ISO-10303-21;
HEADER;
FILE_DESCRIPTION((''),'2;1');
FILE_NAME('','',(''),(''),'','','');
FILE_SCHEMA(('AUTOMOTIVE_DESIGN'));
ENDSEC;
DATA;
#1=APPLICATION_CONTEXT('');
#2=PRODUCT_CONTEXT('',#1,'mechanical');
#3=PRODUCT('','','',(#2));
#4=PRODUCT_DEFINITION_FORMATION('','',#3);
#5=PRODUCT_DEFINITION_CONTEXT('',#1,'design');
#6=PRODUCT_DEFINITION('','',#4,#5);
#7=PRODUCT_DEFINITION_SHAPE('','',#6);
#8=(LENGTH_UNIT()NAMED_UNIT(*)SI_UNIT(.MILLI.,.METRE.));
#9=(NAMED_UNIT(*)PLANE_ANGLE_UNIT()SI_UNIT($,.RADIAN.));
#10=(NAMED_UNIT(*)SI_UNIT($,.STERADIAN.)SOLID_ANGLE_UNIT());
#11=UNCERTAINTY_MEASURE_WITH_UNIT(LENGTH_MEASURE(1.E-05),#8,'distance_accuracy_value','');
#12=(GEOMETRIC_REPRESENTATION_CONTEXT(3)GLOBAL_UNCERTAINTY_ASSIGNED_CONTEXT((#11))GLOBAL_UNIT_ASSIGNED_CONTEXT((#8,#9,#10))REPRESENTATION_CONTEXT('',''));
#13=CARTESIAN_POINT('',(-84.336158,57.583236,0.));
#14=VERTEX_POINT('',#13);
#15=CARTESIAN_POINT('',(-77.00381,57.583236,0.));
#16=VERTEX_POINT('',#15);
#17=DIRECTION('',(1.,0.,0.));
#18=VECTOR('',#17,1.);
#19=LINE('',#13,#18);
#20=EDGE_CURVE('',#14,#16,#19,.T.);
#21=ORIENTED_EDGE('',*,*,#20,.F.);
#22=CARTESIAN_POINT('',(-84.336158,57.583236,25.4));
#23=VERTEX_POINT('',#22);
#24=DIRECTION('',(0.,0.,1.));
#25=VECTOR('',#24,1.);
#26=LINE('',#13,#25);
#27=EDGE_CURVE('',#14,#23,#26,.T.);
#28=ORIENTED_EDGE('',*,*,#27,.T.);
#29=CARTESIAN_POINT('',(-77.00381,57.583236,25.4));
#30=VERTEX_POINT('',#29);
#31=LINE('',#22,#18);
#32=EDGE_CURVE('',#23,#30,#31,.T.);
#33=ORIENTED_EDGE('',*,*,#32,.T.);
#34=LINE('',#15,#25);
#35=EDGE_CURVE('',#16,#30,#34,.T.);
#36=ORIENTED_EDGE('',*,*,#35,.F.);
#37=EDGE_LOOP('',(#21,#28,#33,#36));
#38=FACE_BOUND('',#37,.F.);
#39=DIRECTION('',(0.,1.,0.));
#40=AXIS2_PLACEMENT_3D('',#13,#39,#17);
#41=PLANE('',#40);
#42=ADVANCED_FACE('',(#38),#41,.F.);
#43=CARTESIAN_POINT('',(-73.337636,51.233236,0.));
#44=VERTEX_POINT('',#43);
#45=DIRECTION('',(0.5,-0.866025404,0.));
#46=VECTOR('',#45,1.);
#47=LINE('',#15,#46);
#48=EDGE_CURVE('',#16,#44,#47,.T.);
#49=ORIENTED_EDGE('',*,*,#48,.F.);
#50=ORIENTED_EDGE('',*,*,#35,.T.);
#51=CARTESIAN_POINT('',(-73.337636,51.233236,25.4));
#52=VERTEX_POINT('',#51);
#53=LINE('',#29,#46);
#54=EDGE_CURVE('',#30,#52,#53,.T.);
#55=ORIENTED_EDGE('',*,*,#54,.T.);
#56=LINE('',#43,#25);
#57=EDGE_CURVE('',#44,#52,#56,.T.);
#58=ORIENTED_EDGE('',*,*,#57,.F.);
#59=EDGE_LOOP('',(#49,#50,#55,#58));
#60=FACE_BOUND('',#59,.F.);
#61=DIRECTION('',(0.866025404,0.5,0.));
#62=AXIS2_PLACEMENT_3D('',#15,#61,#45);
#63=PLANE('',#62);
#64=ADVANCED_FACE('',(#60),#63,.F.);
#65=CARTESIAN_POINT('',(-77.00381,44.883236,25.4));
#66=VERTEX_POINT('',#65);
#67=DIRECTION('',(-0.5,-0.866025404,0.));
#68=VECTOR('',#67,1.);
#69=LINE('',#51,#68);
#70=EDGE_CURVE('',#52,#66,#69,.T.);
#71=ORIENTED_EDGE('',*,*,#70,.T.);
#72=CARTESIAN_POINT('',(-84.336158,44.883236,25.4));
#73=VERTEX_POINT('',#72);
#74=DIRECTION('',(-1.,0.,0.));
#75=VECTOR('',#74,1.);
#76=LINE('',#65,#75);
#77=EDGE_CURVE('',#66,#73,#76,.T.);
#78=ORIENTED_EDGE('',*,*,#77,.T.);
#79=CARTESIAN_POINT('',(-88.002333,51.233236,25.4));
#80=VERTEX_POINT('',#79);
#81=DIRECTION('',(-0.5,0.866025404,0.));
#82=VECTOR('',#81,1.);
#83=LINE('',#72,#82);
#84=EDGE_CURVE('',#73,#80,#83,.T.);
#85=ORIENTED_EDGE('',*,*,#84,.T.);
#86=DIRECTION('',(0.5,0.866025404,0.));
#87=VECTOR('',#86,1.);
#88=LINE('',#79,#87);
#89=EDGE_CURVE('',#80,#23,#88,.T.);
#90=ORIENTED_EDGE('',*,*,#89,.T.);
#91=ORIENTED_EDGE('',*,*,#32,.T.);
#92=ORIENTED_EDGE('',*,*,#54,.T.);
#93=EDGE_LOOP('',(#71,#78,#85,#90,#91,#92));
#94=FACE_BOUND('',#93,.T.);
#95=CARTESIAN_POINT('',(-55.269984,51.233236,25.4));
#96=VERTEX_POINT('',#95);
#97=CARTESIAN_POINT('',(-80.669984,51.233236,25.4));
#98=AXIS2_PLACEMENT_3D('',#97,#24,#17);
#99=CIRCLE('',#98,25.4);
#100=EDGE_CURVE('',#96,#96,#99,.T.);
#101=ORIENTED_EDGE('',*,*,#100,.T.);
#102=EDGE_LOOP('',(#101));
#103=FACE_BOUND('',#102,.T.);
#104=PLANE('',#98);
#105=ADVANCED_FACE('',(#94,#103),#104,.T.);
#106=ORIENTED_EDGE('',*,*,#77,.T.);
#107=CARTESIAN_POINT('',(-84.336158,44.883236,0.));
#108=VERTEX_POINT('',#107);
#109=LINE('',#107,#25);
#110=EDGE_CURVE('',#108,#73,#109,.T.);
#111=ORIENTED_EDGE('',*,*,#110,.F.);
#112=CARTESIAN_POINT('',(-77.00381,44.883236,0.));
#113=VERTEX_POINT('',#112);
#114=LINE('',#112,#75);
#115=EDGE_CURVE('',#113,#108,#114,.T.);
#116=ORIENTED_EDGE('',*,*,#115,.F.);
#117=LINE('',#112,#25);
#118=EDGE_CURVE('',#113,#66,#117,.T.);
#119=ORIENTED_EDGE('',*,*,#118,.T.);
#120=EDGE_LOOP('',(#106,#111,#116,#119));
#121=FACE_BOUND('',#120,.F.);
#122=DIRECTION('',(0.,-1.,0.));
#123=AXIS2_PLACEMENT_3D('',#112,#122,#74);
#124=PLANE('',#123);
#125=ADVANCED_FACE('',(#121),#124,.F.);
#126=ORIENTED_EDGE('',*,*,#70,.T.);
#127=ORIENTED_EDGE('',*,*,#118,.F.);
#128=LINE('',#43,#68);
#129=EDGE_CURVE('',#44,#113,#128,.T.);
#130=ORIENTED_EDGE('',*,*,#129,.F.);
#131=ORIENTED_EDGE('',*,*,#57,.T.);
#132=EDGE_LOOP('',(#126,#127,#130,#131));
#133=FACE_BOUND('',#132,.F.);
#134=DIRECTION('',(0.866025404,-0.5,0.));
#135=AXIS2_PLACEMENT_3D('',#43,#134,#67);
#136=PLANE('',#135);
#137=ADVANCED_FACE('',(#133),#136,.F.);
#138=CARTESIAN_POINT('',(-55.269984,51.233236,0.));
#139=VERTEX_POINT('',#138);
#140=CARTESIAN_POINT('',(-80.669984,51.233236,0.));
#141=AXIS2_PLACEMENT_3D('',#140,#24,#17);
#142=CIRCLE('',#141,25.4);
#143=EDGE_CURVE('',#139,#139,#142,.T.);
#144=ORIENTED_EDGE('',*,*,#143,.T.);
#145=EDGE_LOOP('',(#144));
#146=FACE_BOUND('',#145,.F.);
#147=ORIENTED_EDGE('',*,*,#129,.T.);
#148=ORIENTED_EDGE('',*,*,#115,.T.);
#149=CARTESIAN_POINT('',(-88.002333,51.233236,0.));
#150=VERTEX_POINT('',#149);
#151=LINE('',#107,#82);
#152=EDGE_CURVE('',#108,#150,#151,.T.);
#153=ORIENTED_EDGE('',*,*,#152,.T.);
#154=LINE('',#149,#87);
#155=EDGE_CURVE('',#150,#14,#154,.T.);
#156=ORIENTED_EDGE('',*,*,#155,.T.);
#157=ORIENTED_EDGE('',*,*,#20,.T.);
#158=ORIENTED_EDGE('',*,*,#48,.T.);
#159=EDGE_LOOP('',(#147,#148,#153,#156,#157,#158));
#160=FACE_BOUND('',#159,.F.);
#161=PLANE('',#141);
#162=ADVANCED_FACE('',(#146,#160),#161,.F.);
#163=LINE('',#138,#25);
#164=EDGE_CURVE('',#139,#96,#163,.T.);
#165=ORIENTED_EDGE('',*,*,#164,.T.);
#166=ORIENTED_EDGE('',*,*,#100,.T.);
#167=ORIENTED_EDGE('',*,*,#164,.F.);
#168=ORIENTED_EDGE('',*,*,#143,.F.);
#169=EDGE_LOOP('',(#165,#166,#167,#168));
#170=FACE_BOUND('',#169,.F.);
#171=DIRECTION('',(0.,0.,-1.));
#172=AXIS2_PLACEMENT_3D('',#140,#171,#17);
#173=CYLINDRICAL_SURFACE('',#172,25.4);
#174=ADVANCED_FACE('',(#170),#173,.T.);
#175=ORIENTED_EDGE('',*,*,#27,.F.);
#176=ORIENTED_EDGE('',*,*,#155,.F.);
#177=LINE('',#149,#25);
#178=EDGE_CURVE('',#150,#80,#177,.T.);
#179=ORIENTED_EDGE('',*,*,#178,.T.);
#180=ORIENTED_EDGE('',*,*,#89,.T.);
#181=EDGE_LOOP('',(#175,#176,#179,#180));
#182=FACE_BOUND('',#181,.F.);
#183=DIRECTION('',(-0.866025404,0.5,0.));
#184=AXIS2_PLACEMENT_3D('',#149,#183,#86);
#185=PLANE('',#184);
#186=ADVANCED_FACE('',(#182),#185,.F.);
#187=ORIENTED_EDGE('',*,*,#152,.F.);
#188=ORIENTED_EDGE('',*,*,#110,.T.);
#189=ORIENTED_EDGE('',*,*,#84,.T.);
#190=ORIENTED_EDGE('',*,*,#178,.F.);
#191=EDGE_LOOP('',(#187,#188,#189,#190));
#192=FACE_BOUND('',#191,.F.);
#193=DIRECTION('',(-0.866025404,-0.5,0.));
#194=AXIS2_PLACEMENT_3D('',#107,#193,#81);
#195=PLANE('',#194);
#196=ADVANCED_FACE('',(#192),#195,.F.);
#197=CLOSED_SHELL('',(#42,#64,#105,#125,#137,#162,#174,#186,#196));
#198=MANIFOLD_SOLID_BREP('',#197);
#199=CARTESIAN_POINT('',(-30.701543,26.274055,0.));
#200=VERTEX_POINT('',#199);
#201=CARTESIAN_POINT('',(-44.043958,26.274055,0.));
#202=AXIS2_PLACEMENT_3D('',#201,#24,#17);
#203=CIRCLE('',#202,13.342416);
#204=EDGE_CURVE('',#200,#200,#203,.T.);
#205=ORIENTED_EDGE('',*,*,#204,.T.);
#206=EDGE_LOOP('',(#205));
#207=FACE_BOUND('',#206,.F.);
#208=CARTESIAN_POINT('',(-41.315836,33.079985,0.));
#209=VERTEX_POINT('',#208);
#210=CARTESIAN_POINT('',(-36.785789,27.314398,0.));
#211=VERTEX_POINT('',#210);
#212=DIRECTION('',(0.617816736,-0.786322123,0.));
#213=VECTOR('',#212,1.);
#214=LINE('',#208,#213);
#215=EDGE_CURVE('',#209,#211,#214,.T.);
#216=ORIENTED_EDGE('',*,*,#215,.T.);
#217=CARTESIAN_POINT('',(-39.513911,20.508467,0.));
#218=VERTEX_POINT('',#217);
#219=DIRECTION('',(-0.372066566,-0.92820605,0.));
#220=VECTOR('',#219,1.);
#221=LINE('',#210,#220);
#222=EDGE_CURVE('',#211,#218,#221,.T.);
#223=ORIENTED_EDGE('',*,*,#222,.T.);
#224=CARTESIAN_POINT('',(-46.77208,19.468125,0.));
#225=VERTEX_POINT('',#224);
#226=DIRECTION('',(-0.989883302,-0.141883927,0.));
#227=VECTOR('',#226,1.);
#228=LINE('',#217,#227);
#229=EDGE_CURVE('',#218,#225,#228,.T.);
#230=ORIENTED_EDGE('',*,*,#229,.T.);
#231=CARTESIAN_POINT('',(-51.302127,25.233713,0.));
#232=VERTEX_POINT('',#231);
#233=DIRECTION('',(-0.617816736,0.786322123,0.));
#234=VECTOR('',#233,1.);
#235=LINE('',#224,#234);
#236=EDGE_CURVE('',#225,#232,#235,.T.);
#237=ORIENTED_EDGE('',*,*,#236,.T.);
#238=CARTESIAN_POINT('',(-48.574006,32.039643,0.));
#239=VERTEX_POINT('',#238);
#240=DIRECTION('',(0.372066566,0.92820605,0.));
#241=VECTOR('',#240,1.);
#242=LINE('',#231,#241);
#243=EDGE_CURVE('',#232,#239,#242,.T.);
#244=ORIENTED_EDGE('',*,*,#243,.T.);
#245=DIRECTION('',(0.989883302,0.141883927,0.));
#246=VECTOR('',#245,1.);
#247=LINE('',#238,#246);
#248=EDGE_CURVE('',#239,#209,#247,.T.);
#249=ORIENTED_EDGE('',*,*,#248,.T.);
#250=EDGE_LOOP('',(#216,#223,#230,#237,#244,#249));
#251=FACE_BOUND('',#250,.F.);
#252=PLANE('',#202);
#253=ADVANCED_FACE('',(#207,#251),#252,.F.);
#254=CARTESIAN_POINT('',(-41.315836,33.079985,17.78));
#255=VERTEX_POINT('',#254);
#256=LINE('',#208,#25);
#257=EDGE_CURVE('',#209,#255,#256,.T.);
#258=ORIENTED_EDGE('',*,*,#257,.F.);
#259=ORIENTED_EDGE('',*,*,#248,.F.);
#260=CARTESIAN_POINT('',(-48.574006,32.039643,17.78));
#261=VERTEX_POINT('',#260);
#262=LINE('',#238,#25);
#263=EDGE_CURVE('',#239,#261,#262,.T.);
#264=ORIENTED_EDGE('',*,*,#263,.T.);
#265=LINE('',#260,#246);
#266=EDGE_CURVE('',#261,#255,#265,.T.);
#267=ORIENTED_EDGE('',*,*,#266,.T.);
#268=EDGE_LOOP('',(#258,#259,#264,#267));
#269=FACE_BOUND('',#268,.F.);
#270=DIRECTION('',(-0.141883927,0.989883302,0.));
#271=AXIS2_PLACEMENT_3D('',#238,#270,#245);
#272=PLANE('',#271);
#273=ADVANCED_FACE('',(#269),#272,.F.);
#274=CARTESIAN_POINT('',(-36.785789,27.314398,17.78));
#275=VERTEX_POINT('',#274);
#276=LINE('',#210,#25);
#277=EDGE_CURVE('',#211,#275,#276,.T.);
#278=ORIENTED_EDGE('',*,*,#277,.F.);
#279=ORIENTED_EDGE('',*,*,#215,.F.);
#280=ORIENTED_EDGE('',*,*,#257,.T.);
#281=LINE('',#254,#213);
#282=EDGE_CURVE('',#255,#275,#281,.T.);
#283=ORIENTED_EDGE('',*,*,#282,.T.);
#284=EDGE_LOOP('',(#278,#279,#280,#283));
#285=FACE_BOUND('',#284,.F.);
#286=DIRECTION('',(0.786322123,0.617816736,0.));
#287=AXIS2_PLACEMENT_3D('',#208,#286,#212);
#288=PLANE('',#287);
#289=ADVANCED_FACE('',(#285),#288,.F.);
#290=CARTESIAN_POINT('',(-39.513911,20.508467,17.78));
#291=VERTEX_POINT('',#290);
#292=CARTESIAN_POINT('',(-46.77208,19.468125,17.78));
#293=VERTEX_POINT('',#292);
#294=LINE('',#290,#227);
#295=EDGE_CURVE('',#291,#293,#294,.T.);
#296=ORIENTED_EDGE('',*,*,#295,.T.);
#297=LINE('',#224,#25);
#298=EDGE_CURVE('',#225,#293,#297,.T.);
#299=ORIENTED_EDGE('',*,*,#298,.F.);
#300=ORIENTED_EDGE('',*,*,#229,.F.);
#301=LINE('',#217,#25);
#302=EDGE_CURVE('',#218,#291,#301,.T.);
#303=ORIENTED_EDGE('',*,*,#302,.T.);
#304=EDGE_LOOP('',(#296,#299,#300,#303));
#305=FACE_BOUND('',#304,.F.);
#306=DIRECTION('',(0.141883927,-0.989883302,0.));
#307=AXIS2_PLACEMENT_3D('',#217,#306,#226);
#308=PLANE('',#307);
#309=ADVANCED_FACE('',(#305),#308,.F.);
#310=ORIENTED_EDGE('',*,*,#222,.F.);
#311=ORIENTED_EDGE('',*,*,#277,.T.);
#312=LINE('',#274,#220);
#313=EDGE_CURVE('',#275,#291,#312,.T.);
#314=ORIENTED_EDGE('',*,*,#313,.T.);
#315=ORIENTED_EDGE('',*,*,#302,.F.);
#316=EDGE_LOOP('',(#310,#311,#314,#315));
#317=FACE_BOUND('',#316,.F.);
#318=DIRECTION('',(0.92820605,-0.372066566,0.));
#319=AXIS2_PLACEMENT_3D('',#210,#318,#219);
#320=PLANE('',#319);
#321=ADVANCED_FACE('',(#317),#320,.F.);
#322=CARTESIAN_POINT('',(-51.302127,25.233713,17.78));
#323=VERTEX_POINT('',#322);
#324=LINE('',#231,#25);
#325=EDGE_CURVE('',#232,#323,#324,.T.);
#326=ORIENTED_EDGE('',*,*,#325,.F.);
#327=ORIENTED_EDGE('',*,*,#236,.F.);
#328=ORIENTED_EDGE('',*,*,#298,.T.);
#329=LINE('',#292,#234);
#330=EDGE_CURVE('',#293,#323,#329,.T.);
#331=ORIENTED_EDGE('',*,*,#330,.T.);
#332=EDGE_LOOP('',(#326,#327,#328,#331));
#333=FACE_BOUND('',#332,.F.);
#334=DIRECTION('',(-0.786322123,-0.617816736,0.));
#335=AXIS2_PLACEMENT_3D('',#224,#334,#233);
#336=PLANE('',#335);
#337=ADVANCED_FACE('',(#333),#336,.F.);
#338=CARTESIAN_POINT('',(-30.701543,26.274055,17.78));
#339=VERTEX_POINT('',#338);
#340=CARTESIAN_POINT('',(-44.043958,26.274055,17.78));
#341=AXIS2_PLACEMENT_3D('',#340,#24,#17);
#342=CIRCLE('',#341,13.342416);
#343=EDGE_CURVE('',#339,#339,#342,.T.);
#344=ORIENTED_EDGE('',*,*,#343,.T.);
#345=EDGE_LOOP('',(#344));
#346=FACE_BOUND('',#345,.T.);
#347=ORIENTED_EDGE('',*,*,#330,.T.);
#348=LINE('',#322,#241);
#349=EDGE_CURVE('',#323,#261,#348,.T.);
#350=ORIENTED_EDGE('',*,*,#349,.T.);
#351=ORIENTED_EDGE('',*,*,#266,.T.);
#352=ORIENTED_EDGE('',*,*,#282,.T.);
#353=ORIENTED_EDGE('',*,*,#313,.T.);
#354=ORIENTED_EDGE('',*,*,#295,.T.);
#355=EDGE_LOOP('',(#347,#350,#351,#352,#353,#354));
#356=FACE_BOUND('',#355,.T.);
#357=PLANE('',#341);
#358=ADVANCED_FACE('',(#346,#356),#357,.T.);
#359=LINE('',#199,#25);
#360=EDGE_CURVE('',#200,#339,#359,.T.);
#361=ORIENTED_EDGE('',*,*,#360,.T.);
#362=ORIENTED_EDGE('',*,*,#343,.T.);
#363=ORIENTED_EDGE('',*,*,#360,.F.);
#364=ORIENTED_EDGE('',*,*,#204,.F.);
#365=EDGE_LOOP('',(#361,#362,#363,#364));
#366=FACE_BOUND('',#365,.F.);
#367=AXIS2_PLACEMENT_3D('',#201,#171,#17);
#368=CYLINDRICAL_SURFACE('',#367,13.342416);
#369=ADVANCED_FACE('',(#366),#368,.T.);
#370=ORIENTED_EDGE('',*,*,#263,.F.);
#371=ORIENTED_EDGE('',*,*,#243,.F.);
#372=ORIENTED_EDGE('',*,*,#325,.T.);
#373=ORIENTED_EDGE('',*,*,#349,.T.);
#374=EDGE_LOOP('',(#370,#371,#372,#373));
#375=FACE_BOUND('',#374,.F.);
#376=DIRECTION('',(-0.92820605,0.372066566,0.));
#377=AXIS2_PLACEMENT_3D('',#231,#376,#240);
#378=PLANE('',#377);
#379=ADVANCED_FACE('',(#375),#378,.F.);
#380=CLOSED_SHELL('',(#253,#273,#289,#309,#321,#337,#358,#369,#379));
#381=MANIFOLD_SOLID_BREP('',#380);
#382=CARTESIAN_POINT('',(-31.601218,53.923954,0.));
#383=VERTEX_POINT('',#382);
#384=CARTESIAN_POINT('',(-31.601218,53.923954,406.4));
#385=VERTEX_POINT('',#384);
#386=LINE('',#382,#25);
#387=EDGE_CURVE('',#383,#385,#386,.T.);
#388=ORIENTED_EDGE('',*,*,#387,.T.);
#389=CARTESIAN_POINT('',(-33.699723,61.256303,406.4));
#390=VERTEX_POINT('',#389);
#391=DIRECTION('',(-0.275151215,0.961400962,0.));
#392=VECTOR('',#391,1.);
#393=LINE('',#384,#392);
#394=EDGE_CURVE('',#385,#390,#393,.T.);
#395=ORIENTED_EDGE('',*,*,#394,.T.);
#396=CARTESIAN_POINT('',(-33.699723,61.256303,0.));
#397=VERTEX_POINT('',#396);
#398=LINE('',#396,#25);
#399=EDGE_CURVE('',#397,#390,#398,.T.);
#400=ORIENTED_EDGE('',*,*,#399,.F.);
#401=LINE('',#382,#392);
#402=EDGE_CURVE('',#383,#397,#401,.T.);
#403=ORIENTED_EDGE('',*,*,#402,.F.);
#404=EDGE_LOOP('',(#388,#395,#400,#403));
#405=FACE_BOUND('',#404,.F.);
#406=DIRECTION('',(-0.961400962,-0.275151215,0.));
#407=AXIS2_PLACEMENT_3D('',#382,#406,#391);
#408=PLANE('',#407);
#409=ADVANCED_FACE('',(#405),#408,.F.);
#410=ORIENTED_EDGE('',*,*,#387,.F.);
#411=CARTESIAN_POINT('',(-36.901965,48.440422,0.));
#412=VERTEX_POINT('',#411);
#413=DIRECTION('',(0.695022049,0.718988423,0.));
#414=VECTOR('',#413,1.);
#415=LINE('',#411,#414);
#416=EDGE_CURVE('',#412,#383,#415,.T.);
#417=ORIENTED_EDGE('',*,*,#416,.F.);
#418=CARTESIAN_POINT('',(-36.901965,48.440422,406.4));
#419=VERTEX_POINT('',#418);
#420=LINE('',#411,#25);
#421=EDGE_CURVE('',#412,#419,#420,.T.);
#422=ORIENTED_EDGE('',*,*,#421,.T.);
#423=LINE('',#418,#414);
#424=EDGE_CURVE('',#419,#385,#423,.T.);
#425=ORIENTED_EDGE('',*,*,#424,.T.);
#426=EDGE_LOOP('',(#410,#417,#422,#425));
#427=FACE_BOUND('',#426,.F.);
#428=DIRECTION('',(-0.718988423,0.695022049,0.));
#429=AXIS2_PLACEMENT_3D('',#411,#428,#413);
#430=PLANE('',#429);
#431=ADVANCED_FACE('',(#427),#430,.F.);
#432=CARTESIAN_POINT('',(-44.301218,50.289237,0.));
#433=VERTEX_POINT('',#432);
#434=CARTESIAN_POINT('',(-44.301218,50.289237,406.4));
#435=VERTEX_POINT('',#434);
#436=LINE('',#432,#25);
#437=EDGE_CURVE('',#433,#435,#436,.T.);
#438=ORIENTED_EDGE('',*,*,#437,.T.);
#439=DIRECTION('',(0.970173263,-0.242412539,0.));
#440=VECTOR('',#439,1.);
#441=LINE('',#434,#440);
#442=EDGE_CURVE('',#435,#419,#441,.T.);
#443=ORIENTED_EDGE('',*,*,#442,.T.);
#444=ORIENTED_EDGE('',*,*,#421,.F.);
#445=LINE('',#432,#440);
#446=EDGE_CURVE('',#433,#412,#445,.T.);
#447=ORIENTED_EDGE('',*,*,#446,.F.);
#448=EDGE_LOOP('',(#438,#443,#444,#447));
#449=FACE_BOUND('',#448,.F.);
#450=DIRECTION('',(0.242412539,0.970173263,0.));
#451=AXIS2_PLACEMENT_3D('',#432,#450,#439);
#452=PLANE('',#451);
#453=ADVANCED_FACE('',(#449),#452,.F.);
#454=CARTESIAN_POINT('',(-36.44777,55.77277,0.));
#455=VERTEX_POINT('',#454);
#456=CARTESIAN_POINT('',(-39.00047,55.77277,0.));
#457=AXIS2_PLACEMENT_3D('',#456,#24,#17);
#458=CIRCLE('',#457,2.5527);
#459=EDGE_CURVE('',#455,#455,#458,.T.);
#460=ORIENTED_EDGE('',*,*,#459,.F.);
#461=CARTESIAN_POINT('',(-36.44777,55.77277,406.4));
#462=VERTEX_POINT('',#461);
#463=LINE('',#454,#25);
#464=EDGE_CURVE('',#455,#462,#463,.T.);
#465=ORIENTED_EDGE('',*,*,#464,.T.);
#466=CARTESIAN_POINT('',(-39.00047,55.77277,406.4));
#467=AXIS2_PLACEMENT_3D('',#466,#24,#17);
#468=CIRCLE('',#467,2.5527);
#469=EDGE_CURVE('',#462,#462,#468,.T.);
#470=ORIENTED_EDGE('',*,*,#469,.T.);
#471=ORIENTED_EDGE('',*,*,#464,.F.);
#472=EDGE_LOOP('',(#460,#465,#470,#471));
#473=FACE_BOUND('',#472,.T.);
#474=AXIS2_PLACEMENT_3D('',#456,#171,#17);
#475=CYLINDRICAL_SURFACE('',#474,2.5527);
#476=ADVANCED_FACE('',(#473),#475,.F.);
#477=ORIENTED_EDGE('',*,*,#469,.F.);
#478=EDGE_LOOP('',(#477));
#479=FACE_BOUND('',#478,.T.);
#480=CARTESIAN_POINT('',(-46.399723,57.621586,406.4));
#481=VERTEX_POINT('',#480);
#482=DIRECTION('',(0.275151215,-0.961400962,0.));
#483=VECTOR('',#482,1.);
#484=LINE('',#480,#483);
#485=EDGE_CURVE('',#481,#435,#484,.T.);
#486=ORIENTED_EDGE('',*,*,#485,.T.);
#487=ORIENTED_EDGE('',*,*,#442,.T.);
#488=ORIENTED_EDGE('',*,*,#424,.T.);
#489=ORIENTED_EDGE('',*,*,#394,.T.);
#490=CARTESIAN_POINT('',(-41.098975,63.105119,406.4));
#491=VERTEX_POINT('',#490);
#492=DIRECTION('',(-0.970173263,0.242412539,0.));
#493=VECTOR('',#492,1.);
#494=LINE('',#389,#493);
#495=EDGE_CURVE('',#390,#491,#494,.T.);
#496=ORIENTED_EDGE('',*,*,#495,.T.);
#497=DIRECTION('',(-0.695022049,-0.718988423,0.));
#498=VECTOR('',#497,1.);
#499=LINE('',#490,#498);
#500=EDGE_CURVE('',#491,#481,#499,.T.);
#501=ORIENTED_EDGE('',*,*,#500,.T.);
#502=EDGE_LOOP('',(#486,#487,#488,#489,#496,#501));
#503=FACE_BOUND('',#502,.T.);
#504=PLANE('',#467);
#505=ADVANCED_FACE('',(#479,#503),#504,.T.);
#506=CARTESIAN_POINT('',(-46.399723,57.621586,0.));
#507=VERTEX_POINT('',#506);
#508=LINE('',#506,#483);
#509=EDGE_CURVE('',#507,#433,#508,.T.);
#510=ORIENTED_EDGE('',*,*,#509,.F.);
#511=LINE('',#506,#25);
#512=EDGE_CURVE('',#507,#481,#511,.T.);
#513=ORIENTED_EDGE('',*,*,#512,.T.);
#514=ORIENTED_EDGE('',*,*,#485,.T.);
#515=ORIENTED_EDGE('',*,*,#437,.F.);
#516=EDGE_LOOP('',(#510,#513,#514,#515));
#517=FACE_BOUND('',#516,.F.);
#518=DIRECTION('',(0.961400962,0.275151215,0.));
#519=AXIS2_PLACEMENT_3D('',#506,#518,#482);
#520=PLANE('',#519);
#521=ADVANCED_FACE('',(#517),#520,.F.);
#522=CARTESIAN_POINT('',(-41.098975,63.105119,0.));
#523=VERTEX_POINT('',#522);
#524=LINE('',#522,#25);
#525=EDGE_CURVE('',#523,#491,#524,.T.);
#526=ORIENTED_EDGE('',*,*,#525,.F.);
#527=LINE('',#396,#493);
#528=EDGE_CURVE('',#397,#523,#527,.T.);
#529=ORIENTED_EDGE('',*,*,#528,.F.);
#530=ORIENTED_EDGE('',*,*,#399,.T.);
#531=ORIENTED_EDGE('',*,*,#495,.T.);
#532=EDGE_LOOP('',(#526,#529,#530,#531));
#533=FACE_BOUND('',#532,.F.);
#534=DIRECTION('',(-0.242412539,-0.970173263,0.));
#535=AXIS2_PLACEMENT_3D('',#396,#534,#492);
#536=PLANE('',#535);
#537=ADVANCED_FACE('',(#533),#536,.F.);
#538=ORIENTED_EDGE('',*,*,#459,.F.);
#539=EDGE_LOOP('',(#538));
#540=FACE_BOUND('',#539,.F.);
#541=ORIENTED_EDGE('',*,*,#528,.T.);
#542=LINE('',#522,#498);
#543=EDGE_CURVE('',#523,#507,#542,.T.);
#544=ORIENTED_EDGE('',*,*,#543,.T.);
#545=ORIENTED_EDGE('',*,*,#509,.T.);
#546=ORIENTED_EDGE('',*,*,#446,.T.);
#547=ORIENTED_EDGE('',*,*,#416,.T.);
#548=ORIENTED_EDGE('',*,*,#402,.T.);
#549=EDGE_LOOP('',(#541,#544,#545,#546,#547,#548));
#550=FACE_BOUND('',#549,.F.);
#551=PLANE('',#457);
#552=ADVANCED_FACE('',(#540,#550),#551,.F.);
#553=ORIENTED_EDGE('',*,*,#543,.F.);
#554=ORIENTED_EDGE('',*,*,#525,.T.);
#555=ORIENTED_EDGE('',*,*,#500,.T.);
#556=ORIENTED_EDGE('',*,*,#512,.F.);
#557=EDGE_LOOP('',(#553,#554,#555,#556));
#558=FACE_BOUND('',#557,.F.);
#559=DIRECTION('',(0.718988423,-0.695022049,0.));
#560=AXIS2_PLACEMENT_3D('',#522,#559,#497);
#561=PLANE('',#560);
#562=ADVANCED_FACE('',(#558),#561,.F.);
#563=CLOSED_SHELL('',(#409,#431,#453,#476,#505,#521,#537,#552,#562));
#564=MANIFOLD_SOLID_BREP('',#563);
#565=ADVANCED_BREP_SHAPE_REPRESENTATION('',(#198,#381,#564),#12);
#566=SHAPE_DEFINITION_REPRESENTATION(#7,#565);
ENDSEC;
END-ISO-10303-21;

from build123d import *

# Parameters (mm, degrees)
F2_R     = 25.4
F3_DEPTH = 25.4
F4_R     = 2.5527
F5_DEPTH = 406.4
F6_R     = 13.3424155759
F7_DEPTH = 17.78


# Not quite as in the source:
# - a variable given as a bare number and used for a length is read in inches; the dataset says mm whatever the document's units were


with BuildPart() as f3:
    # F2 (on Top) → F3 (new body)
    with BuildSketch(Plane.XY):
        with Locations((-80.6699842215, 51.2332357466)):
            Circle(F2_R)
        Polygon((-73.3376358028, 51.2332357466), (-77.0038100121, 44.8832357466), (-84.3361584308, 44.8832357466), (-88.0023326402, 51.2332357466), (-84.3361584308, 57.5832357466), (-77.0038100121, 57.5832357466), align=None, mode=Mode.SUBTRACT)
    extrude(amount=F3_DEPTH)


with BuildPart() as f5:
    # F4 (on Top) → F5 (new body)
    with BuildSketch(Plane.XY):
        Polygon((-36.9019653495, 48.4404217775), (-31.6012177704, 53.9239544898), (-33.6997226121, 61.2563029085), (-41.098975033, 63.1051186149), (-46.3997226121, 57.6215859026), (-44.3012177704, 50.2892374839), align=None)
        with Locations((-39.0004701912, 55.7727701962)):
            Circle(F4_R, mode=Mode.SUBTRACT)
    extrude(amount=F5_DEPTH)


with BuildPart() as f7:
    # F6 (on Top) → F7 (new body)
    with BuildSketch(Plane.XY):
        with Locations((-44.0439581871, 26.2740552425)):
            Circle(F6_R)
        Polygon((-36.785788924, 27.3143976291), (-39.5139106202, 20.508467469), (-46.7720798833, 19.4681250824), (-51.3021274502, 25.233712856), (-48.5740057541, 32.0396430161), (-41.3158364909, 33.0799854026), align=None, mode=Mode.SUBTRACT)
    extrude(amount=F7_DEPTH)


solid = Compound([f3.part, f5.part, f7.part])
